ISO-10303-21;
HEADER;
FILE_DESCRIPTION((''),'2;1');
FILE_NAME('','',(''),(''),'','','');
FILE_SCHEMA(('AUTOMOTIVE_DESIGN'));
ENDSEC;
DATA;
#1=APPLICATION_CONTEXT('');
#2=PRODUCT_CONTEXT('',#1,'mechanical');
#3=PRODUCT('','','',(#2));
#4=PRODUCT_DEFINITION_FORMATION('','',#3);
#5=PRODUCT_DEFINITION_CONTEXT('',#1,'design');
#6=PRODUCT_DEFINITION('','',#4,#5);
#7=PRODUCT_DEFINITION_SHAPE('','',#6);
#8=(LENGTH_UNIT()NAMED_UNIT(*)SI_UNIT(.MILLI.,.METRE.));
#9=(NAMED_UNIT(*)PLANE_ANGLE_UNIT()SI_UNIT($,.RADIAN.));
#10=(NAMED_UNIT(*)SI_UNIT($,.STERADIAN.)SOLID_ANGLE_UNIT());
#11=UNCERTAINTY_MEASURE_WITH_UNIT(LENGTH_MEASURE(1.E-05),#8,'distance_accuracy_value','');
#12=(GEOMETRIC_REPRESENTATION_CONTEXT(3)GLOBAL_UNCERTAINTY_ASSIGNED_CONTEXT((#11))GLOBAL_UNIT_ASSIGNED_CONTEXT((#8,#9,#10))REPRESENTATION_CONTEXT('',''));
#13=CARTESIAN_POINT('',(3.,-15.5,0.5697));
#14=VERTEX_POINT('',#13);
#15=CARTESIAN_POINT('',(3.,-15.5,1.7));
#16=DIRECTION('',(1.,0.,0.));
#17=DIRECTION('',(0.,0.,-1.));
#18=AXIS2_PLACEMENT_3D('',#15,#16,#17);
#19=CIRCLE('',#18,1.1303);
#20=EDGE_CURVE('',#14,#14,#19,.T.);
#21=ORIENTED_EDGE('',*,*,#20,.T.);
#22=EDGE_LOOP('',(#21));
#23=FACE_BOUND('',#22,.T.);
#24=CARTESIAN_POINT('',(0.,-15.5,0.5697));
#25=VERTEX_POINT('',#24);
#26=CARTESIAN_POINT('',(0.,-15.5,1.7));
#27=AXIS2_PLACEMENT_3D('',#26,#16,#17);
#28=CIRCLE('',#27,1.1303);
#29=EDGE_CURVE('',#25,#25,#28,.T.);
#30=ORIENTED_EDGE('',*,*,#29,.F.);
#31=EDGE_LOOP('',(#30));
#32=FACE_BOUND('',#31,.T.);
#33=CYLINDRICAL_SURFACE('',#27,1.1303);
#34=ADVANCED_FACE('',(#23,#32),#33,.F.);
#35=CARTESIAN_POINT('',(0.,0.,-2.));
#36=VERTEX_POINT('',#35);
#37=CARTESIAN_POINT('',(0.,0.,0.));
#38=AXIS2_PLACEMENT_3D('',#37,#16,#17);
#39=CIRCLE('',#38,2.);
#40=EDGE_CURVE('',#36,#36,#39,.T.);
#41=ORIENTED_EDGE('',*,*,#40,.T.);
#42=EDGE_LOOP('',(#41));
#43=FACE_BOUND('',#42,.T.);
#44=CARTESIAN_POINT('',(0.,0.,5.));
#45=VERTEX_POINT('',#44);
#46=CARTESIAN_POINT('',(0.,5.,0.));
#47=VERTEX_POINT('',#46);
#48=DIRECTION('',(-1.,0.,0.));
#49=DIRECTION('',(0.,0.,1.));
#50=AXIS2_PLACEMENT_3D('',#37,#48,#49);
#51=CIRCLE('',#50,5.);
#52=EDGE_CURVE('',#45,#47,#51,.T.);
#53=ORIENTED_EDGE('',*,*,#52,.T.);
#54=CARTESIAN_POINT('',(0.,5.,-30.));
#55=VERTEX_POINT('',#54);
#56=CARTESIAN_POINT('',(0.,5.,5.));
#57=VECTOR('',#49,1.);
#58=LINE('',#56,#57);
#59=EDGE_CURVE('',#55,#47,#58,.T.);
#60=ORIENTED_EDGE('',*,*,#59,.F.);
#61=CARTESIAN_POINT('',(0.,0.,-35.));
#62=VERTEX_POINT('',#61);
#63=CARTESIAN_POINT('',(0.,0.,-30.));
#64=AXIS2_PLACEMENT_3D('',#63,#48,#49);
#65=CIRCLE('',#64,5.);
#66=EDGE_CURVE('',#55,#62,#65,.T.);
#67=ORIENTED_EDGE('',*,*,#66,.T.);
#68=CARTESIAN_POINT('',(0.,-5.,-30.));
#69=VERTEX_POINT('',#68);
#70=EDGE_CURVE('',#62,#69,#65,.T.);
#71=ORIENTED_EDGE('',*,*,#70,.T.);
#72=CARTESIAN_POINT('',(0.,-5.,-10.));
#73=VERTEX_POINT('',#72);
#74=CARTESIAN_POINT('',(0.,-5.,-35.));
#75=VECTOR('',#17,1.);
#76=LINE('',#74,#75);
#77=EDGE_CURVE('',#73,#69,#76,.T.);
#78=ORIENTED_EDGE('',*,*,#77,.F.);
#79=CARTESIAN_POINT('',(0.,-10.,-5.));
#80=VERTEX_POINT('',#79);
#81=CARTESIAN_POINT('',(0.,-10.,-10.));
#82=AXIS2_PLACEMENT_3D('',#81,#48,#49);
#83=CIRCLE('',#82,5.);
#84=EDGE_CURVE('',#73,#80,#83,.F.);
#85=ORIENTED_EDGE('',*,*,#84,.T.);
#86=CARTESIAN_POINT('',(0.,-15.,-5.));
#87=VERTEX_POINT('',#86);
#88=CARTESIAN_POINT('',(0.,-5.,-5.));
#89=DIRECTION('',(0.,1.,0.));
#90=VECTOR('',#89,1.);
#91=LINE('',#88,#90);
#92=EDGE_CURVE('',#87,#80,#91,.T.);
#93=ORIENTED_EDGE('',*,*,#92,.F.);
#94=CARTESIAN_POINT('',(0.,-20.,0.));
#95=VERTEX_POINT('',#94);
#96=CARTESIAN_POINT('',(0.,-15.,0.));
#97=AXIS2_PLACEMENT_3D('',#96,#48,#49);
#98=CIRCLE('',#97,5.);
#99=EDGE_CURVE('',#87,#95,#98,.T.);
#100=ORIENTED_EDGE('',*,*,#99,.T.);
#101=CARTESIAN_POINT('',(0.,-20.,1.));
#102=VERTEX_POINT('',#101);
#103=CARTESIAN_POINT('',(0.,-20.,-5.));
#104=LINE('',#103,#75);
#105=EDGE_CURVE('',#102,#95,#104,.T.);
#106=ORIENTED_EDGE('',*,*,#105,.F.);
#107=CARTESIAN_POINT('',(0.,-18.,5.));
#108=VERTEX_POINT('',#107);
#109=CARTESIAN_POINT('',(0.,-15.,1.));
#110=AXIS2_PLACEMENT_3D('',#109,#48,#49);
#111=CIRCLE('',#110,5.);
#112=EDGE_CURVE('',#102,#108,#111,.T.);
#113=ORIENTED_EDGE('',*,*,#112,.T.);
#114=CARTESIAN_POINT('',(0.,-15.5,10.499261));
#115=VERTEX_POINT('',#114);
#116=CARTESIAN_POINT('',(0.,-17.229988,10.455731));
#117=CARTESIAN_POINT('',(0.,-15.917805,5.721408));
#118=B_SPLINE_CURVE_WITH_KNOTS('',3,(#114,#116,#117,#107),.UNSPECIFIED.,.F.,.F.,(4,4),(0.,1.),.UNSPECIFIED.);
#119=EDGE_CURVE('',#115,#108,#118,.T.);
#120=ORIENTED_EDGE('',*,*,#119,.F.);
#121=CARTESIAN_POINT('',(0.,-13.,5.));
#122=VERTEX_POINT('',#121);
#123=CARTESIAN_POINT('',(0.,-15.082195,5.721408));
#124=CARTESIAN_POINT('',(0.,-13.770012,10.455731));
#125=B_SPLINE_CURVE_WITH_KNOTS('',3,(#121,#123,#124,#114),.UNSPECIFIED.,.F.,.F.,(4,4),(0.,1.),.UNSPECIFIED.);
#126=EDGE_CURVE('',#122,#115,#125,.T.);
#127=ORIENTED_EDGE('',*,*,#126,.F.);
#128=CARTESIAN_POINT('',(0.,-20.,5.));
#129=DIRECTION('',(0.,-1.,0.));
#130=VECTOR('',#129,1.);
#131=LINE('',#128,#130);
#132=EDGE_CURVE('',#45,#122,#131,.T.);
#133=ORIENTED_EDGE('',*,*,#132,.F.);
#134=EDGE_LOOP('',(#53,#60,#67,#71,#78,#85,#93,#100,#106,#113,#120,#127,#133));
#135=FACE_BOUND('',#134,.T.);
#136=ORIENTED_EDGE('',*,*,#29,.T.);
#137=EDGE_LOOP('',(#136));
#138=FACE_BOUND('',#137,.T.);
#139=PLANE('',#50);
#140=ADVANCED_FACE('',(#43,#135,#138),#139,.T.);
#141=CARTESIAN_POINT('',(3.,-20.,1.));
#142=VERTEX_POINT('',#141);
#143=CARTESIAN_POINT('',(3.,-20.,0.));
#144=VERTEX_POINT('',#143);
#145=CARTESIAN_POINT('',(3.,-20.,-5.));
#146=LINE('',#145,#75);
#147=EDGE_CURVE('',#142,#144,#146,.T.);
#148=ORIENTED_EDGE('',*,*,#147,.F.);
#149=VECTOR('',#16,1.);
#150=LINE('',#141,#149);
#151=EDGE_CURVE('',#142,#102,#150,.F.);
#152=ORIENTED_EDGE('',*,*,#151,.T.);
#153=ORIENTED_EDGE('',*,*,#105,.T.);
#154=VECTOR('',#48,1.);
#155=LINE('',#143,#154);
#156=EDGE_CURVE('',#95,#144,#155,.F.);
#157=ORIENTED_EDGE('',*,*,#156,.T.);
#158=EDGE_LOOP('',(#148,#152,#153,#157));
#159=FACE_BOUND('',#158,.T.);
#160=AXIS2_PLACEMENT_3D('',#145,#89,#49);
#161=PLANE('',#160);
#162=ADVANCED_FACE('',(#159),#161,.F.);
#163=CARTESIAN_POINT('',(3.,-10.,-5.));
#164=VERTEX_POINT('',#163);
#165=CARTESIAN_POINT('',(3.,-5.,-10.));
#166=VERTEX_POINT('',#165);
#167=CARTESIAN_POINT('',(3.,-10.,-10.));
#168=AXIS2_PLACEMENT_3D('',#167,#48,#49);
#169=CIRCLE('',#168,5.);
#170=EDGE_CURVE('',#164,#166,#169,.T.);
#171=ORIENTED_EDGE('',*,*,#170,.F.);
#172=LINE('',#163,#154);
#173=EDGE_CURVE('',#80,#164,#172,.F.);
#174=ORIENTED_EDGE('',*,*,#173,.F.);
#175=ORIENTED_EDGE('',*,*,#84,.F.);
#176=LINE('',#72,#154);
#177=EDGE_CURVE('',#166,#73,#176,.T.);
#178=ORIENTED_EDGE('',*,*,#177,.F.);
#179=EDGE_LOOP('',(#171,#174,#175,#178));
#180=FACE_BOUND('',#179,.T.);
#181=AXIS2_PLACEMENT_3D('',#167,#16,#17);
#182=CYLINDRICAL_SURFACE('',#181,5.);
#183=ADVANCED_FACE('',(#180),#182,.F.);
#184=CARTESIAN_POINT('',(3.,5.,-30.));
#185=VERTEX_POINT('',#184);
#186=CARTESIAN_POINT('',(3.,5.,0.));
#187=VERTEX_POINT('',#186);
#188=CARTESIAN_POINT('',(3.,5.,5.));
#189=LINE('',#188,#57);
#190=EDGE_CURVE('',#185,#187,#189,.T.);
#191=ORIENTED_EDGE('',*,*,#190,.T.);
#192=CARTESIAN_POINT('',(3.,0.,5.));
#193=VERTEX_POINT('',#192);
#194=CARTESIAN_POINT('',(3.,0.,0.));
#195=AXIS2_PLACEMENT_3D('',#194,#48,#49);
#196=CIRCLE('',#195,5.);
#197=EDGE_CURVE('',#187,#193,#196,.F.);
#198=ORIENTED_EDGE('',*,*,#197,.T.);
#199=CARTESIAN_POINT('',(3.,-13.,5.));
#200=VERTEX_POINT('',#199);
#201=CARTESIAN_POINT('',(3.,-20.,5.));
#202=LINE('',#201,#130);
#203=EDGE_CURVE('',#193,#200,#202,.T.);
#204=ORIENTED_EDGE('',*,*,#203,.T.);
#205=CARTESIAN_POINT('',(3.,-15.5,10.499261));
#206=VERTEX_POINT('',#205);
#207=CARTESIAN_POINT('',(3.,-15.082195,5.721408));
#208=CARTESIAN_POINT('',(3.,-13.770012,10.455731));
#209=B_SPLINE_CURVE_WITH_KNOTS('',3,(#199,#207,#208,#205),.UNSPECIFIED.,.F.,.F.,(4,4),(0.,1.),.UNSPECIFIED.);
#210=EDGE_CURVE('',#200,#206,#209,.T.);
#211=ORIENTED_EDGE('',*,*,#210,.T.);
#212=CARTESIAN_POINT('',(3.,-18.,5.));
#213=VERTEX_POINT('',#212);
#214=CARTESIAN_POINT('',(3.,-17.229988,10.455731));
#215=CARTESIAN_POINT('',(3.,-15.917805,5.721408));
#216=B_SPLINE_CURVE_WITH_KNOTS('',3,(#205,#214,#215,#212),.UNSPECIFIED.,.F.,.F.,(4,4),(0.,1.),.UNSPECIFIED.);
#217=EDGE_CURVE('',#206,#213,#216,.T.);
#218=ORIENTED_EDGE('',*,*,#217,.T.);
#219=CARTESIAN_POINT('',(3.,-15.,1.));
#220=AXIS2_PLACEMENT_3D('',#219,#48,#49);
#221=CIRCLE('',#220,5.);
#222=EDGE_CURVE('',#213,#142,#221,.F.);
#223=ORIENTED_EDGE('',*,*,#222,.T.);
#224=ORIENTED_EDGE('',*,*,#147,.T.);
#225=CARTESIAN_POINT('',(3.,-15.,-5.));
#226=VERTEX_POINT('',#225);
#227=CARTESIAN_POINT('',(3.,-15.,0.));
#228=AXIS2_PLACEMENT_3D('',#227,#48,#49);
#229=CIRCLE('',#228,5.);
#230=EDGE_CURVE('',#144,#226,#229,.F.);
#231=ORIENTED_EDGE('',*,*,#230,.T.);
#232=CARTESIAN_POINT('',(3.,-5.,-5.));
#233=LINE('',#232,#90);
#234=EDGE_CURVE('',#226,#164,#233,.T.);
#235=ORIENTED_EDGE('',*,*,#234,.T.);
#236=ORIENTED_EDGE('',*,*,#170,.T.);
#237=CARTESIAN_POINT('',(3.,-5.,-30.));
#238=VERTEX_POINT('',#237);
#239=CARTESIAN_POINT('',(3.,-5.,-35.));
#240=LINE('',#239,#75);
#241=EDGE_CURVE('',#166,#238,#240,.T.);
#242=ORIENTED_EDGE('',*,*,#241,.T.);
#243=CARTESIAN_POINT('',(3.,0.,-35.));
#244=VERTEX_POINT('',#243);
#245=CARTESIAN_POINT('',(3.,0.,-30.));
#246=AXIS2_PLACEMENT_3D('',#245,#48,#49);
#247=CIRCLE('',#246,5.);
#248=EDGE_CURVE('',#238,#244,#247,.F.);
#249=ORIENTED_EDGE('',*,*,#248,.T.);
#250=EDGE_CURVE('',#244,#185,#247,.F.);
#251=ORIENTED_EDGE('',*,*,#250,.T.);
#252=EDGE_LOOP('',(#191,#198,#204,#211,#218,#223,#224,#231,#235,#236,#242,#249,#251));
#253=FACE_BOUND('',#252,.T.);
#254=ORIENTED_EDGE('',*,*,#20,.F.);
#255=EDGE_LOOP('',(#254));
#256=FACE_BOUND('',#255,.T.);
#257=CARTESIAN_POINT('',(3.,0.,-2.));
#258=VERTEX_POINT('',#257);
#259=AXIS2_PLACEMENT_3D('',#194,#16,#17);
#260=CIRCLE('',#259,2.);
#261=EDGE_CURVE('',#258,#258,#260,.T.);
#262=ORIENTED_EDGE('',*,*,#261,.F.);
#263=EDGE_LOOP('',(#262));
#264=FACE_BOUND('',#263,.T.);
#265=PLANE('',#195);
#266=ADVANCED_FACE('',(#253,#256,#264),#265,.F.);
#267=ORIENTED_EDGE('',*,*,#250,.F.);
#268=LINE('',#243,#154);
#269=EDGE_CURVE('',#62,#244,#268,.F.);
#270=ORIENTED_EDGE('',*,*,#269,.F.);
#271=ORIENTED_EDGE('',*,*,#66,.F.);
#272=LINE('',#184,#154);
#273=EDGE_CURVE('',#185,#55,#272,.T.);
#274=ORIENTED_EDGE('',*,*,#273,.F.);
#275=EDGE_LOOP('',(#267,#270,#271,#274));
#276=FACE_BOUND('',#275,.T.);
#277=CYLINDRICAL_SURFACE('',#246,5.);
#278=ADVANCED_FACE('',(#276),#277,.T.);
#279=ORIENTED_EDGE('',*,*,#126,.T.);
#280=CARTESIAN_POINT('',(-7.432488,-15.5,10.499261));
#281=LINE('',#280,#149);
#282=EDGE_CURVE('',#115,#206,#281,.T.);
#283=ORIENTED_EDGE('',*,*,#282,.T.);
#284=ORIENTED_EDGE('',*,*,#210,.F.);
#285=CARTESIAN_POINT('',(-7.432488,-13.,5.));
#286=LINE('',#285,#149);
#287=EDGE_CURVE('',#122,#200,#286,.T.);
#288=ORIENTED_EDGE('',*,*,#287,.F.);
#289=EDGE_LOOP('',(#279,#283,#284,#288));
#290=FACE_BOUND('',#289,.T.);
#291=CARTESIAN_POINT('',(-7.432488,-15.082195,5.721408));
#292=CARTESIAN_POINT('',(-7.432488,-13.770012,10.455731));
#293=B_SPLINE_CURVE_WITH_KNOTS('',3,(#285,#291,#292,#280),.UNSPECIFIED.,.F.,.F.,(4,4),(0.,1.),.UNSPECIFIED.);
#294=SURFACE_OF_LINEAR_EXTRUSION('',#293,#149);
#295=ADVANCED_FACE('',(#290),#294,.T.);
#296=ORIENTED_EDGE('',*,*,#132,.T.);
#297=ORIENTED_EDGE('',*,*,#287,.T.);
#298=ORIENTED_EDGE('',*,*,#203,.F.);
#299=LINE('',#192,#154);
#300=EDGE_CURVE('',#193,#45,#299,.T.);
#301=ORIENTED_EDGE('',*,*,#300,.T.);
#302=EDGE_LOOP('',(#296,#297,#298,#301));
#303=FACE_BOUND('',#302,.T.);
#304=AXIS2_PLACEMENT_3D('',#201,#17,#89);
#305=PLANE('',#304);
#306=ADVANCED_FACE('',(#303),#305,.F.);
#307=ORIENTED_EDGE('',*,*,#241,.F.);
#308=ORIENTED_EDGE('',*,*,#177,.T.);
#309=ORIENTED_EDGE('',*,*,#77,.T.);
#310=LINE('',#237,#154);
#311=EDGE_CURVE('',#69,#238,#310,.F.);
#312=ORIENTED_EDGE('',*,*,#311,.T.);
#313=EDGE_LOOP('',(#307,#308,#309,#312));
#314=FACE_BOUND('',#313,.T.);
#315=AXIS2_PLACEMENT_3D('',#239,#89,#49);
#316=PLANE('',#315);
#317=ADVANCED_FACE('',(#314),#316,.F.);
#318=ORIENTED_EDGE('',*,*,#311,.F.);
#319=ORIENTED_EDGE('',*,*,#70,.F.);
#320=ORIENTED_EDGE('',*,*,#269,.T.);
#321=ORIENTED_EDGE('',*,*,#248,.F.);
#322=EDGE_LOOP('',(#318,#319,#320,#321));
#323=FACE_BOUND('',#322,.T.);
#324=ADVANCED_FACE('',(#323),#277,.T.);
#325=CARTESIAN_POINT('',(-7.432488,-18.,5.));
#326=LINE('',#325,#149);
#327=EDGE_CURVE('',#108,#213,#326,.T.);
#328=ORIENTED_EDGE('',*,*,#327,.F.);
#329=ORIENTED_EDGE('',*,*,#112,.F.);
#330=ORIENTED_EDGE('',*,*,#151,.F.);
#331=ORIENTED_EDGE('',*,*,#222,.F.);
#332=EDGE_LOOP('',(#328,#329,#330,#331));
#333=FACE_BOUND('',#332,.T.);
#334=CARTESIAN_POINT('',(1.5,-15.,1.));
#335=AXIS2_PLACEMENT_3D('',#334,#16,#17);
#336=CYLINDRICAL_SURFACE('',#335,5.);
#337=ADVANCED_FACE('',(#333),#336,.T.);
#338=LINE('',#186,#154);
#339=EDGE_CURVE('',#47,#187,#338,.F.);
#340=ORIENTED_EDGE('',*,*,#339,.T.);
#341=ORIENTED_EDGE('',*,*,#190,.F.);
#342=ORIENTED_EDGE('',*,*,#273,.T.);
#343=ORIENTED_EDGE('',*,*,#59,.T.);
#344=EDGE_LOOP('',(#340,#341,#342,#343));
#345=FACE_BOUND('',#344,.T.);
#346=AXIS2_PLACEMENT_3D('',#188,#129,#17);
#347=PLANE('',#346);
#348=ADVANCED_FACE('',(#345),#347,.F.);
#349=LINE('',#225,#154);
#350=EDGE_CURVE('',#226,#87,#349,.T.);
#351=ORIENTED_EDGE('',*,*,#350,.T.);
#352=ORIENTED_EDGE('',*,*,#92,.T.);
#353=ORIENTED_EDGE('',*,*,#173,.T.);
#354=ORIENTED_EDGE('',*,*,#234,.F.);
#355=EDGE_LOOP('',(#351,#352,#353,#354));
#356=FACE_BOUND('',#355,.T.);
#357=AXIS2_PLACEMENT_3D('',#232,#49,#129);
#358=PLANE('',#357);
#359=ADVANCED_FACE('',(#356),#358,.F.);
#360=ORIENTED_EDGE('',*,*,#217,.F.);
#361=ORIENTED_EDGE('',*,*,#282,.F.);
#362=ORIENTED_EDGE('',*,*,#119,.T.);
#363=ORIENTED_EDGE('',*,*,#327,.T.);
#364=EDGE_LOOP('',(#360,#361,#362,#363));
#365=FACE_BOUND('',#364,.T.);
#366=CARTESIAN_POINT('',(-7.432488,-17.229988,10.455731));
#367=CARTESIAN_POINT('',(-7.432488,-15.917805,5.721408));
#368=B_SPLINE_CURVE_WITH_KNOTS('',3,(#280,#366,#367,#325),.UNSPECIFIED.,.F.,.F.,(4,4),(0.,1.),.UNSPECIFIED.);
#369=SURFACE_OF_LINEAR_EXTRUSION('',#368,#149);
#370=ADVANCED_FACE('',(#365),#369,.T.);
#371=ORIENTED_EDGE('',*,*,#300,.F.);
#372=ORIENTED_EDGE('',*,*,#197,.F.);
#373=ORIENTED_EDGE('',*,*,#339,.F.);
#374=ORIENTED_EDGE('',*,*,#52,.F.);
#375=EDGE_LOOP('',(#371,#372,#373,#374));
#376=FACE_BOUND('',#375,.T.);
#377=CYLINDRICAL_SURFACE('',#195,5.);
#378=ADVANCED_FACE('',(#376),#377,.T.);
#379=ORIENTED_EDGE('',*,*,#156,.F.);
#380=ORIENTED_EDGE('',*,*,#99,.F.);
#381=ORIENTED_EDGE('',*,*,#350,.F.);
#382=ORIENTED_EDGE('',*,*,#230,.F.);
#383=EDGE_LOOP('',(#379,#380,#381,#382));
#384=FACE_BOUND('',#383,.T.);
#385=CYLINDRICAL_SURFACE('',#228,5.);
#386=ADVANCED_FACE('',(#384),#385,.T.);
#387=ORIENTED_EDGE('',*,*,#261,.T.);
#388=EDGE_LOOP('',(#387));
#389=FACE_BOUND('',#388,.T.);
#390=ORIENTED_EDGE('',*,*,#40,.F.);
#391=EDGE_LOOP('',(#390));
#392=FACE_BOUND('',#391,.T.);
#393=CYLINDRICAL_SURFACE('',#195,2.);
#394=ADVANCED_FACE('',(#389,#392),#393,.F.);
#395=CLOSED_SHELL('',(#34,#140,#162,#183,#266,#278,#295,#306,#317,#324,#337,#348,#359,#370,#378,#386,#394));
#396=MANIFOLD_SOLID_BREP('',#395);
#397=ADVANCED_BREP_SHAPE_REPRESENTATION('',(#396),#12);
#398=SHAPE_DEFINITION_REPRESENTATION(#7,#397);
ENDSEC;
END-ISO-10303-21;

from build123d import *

# Parameters (mm, degrees)
SKETCH1_R           = 2
BOSS_EXTRUDE1_DEPTH = 3
SKETCH2_R           = 1.1303
CUT_EXTRUDE1_DEPTH  = 41.422765863
BOSS_EXTRUDE4_DEPTH = 3
FILLET1_R           = 5


with BuildPart() as part:
    # Sketch1 → Boss-Extrude1 (new body)
    with BuildSketch(Plane(origin=(0, 0, 0), x_dir=(0, 0, -1), z_dir=(1, 0, 0))):
        Polygon((-5, 5), (35, 5), (35, -5), (5, -5), (5, -20), (-5, -20), align=None)
        Circle(SKETCH1_R, mode=Mode.SUBTRACT)
    extrude(amount=BOSS_EXTRUDE1_DEPTH)

    # Sketch2 → Cut-Extrude1 (cut, through all)
    with BuildSketch(Plane(origin=(3, 0, 0), x_dir=(0, 0, -1), z_dir=(1, 0, 0))):
        with Locations((-1.7, -15.5)):
            Circle(SKETCH2_R)
    extrude(amount=-CUT_EXTRUDE1_DEPTH, mode=Mode.SUBTRACT)

    # Sketch3 → Boss-Extrude4 (add)
    with BuildSketch(Plane(origin=(3, 0, 0), x_dir=(0, 0, -1), z_dir=(1, 0, 0))):
        with BuildLine():
            Line((-5, -18), (-5, -13))
            add(Edge.make_bspline(
                [(-5, -13), (-5.721407716, -15.082195162), (-10.455731115, -13.770011947), (-10.499261295, -15.5)],
                knots=[0, 0, 0, 0, 1, 1, 1, 1], degree=3))
            add(Edge.make_bspline(
                [(-5, -18), (-5.721407716, -15.917804838), (-10.455731115, -17.229988053), (-10.499261295, -15.5)],
                knots=[0, 0, 0, 0, 1, 1, 1, 1], degree=3))
        make_face()
    extrude(amount=-BOSS_EXTRUDE4_DEPTH)

    # Fillet1
    # the kernel refuses this fillet: 5 mm, written as the material it adds along each edge
    with BuildSketch(Plane(origin=(0, -5, -5), x_dir=(0, 0, -1), z_dir=(1, 0, 0))) as fillet1_piece_1:
        with BuildLine():
            CenterArc((FILLET1_R, -FILLET1_R), FILLET1_R, 90, 90)
            Line((0, -FILLET1_R), (0, 0))
            Line((0, 0), (FILLET1_R, 0))
        make_face()
    extrude(amount=3)
    # the kernel refuses this fillet: 5 mm, written as the material it takes off along each edge
    with BuildSketch(Plane(origin=(-12.5, -20, -5), x_dir=(0, 1, 0), z_dir=(1, 0, 0)), Plane(origin=(-12.5, -5, -35), x_dir=(0, 1, 0), z_dir=(1, 0, 0)), Plane(origin=(-12.5, 5, -35), x_dir=(0, 0, 1), z_dir=(1, 0, 0))) as fillet1_2_piece_1:
        with BuildLine():
            CenterArc((FILLET1_R, FILLET1_R), FILLET1_R, 180, 90)
            Line((0, FILLET1_R), (0, 0))
            Line((0, 0), (FILLET1_R, 0))
        make_face()
    extrude(amount=28, mode=Mode.SUBTRACT)
    with BuildSketch(Plane(origin=(-12.5, 5, 5), x_dir=(0, 0, -1), z_dir=(1, 0, 0))) as fillet1_2_piece_2:
        with BuildLine():
            CenterArc((FILLET1_R, -FILLET1_R), FILLET1_R, 90, 90)
            Line((0, -FILLET1_R), (0, 0))
            Line((0, 0), (FILLET1_R, 0))
        make_face()
    extrude(amount=28, mode=Mode.SUBTRACT)
    with BuildSketch(Plane(origin=(-10, -20, 5), x_dir=(0, 0, -1), z_dir=(1, 0, 0))) as fillet1_2_piece_3:
        with BuildLine():
            CenterArc((4, 5), FILLET1_R, 216.869897646, 53.130102354)
            Line((0, 2), (0, 0))
            Line((0, 0), (4, 0))
        make_face()
    extrude(amount=23, mode=Mode.SUBTRACT)


solid = part.part
